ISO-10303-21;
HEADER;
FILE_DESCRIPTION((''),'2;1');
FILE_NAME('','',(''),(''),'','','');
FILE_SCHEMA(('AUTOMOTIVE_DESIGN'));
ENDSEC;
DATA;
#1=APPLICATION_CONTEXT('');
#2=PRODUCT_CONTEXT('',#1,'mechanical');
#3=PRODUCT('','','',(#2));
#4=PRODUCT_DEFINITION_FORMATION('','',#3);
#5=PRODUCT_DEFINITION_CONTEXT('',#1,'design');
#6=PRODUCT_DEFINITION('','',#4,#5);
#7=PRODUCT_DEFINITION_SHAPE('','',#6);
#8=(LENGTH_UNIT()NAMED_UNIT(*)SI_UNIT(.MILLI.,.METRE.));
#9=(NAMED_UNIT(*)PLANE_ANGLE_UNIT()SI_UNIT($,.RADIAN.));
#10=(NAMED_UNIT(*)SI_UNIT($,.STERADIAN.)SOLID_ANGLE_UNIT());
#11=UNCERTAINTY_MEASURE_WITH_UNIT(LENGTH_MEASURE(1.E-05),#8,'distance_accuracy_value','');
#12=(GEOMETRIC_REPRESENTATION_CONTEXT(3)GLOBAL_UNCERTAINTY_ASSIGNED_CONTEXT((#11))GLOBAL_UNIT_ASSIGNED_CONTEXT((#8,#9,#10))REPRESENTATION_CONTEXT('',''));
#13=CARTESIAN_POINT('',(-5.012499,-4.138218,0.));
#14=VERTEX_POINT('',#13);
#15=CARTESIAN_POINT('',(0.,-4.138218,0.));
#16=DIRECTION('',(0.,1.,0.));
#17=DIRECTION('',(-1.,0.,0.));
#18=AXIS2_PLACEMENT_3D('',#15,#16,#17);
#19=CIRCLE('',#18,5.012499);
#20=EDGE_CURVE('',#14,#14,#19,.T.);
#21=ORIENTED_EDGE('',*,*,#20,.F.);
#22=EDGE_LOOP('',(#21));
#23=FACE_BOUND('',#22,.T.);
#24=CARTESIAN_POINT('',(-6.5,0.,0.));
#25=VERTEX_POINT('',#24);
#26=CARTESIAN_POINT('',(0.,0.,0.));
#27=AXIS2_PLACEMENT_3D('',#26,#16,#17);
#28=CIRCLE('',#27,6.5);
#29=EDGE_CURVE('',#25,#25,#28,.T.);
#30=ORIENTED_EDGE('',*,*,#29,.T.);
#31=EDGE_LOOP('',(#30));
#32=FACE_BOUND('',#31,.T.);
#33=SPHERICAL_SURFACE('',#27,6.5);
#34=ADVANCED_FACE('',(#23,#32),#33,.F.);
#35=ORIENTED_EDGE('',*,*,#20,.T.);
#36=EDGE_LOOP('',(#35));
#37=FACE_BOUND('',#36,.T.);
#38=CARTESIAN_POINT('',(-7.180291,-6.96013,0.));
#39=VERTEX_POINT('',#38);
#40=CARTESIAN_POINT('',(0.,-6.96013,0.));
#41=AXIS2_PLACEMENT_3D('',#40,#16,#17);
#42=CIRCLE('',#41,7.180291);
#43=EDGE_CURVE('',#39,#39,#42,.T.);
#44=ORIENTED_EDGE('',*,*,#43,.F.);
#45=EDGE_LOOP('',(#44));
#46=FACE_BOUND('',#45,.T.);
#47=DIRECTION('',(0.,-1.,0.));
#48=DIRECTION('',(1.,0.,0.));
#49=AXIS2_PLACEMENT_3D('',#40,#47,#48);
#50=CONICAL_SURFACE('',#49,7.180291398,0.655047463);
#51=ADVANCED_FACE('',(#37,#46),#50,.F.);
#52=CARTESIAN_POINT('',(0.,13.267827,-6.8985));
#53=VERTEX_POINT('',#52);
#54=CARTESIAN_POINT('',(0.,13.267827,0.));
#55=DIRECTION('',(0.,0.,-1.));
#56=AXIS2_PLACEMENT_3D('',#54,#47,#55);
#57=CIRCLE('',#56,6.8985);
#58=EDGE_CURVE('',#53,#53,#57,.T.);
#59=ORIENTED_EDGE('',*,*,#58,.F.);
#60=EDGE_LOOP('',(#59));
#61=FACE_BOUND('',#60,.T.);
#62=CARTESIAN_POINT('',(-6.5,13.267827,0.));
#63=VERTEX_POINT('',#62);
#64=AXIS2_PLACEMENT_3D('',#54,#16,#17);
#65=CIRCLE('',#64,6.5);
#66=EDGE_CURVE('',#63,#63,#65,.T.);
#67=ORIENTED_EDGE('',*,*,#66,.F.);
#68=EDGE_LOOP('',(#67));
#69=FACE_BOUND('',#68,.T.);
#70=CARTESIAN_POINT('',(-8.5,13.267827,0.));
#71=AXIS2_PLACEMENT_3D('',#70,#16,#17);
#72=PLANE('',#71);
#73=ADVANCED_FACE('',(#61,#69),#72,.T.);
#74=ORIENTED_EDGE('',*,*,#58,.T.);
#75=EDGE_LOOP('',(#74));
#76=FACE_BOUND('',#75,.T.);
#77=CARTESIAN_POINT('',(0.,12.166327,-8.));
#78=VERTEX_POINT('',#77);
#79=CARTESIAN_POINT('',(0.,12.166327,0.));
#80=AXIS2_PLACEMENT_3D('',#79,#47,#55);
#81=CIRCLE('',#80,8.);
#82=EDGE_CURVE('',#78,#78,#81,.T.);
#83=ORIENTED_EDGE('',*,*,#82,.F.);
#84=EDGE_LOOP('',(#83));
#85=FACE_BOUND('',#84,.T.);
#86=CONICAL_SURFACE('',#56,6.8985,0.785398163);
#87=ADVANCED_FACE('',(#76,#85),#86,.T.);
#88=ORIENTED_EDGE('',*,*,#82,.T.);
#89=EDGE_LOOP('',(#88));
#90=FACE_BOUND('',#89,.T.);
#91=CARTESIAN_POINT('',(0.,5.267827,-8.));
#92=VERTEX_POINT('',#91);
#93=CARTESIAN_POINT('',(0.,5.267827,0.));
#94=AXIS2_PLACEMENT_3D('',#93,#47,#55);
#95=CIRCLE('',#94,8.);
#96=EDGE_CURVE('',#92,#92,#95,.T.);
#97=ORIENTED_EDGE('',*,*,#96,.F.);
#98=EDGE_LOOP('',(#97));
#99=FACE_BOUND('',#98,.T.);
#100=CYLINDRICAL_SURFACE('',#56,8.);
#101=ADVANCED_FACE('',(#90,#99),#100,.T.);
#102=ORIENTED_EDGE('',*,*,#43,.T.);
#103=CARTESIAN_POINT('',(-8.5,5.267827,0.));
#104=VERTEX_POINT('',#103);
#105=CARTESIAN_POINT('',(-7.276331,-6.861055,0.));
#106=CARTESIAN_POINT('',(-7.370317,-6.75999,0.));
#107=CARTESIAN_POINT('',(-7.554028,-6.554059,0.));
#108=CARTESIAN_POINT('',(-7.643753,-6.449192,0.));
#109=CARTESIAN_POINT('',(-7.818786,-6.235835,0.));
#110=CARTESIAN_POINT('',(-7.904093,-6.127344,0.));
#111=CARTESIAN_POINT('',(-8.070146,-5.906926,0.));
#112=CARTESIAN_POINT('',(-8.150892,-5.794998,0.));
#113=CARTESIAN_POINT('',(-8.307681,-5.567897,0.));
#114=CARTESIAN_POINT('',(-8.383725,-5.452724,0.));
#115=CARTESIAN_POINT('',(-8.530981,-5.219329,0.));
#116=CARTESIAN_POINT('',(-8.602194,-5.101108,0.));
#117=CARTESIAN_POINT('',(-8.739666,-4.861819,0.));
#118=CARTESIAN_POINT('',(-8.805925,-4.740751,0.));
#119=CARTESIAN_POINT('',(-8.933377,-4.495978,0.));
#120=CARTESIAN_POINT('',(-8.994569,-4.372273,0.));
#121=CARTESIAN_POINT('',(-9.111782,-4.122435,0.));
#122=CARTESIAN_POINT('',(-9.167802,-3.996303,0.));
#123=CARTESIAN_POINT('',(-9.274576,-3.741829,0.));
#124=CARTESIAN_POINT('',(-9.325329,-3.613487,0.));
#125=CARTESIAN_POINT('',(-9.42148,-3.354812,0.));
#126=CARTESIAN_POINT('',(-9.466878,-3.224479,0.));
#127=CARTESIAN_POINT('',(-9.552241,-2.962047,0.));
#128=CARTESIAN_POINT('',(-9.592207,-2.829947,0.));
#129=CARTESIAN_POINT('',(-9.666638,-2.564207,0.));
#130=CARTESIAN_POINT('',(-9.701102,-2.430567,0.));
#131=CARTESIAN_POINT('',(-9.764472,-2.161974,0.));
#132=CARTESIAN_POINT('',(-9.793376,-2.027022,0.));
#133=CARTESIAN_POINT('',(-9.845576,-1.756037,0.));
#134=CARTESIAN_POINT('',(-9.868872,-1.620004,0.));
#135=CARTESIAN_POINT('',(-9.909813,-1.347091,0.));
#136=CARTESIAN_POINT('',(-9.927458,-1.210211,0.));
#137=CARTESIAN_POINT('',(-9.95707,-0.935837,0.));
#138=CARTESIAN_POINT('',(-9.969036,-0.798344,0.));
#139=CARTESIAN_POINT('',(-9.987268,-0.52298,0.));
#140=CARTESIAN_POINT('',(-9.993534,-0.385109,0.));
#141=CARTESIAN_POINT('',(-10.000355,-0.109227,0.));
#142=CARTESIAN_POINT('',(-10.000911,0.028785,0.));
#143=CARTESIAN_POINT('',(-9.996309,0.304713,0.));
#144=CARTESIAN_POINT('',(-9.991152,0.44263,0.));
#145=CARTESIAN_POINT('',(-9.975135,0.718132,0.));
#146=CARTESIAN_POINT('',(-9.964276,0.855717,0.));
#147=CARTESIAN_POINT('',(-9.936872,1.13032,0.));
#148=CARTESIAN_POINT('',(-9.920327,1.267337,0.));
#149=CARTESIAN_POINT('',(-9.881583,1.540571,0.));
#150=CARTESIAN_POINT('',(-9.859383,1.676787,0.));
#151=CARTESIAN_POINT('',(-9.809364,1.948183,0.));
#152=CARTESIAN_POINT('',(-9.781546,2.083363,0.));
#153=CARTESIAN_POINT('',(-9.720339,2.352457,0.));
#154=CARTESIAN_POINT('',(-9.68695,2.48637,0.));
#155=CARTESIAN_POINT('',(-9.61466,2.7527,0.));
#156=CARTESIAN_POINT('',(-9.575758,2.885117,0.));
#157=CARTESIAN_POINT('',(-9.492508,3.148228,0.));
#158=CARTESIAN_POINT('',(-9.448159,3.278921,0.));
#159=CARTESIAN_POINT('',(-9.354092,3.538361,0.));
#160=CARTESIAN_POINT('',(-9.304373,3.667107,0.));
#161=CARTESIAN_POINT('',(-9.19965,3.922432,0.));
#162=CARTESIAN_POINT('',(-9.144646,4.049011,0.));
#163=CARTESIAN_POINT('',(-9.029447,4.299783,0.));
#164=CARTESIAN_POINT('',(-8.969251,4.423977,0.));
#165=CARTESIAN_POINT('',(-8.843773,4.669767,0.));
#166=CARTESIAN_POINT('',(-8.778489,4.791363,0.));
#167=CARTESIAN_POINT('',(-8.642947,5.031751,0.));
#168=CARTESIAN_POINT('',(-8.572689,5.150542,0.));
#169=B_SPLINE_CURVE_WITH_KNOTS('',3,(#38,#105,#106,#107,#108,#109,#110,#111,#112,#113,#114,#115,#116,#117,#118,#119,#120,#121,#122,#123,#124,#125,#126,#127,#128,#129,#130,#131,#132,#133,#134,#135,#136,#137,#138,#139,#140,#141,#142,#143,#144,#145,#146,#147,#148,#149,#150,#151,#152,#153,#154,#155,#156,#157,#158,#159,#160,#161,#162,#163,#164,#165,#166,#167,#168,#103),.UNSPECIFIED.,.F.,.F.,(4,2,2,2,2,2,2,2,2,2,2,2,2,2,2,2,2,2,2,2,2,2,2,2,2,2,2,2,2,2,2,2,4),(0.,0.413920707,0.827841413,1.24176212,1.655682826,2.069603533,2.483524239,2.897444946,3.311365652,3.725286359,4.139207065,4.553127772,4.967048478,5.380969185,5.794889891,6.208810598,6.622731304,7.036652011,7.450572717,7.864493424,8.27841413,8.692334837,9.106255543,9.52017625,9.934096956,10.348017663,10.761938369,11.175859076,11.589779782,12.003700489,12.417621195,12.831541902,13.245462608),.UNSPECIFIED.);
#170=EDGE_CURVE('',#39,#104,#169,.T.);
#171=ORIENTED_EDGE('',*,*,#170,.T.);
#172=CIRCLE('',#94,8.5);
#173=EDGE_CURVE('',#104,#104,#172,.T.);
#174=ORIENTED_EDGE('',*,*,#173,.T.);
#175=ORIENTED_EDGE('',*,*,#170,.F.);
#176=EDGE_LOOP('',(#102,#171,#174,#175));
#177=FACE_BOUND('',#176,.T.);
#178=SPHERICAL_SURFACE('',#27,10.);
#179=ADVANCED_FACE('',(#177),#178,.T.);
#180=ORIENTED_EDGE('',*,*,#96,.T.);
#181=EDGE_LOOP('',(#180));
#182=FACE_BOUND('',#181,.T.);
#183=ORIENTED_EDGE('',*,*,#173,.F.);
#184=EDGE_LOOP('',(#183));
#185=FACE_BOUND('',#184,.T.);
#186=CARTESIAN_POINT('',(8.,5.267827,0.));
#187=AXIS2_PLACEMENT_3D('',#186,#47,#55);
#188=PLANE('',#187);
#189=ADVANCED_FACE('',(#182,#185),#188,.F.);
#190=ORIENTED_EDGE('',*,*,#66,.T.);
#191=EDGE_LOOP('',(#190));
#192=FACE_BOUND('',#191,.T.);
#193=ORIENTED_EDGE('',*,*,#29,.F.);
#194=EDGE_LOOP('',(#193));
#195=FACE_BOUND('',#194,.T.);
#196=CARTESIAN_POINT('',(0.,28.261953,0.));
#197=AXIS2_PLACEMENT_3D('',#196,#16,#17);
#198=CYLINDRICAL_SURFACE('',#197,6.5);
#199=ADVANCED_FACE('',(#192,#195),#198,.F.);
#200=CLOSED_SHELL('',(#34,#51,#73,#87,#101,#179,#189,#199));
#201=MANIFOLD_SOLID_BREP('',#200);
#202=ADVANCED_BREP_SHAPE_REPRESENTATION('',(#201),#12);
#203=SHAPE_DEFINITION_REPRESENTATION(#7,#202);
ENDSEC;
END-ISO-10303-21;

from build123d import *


# Read off the part's stored shape, not the designer's step: M16x2.0 Machine Threads Stud1
with BuildPart() as part:
    # Sketch1 → Revolve1 (revolve)
    with BuildSketch(Plane.XY):
        with BuildLine():
            Line((-8.5, 13.267826876), (-6.5, 13.267826876))
            Line((-6.5, 13.267826876), (-6.5, 0))
            ThreePointArc((-6.5, 0), (-6.116831152, -2.198721596), (-5.01249949, -4.138218078))
            Line((-5.01249949, -4.138218078), (-7.180291398, -6.960130418))
            ThreePointArc((-7.180291398, -6.960130418), (-9.942264304, -1.073024006), (-8.5, 5.267826876))
            Line((-8.5, 5.267826876), (-8.5, 13.267826876))
        make_face()
    revolve(axis=Axis((0, 28.261953017, 0), (0, -1, 0)))

    # M16x2.0 Machine Threads Stud1 outline → M16x2.0 Machine Threads Stud1 (revolve, cut)
    with BuildSketch(Plane.XY):
        Polygon((8.5, 13.267826876), (6.8985, 13.267826876), (8, 12.166326876), (8, 5.267826876), (8.5, 5.267826876), align=None)
    revolve(axis=Axis((0, 0, 0), (0, 1, 0)), mode=Mode.SUBTRACT)


solid = part.part
